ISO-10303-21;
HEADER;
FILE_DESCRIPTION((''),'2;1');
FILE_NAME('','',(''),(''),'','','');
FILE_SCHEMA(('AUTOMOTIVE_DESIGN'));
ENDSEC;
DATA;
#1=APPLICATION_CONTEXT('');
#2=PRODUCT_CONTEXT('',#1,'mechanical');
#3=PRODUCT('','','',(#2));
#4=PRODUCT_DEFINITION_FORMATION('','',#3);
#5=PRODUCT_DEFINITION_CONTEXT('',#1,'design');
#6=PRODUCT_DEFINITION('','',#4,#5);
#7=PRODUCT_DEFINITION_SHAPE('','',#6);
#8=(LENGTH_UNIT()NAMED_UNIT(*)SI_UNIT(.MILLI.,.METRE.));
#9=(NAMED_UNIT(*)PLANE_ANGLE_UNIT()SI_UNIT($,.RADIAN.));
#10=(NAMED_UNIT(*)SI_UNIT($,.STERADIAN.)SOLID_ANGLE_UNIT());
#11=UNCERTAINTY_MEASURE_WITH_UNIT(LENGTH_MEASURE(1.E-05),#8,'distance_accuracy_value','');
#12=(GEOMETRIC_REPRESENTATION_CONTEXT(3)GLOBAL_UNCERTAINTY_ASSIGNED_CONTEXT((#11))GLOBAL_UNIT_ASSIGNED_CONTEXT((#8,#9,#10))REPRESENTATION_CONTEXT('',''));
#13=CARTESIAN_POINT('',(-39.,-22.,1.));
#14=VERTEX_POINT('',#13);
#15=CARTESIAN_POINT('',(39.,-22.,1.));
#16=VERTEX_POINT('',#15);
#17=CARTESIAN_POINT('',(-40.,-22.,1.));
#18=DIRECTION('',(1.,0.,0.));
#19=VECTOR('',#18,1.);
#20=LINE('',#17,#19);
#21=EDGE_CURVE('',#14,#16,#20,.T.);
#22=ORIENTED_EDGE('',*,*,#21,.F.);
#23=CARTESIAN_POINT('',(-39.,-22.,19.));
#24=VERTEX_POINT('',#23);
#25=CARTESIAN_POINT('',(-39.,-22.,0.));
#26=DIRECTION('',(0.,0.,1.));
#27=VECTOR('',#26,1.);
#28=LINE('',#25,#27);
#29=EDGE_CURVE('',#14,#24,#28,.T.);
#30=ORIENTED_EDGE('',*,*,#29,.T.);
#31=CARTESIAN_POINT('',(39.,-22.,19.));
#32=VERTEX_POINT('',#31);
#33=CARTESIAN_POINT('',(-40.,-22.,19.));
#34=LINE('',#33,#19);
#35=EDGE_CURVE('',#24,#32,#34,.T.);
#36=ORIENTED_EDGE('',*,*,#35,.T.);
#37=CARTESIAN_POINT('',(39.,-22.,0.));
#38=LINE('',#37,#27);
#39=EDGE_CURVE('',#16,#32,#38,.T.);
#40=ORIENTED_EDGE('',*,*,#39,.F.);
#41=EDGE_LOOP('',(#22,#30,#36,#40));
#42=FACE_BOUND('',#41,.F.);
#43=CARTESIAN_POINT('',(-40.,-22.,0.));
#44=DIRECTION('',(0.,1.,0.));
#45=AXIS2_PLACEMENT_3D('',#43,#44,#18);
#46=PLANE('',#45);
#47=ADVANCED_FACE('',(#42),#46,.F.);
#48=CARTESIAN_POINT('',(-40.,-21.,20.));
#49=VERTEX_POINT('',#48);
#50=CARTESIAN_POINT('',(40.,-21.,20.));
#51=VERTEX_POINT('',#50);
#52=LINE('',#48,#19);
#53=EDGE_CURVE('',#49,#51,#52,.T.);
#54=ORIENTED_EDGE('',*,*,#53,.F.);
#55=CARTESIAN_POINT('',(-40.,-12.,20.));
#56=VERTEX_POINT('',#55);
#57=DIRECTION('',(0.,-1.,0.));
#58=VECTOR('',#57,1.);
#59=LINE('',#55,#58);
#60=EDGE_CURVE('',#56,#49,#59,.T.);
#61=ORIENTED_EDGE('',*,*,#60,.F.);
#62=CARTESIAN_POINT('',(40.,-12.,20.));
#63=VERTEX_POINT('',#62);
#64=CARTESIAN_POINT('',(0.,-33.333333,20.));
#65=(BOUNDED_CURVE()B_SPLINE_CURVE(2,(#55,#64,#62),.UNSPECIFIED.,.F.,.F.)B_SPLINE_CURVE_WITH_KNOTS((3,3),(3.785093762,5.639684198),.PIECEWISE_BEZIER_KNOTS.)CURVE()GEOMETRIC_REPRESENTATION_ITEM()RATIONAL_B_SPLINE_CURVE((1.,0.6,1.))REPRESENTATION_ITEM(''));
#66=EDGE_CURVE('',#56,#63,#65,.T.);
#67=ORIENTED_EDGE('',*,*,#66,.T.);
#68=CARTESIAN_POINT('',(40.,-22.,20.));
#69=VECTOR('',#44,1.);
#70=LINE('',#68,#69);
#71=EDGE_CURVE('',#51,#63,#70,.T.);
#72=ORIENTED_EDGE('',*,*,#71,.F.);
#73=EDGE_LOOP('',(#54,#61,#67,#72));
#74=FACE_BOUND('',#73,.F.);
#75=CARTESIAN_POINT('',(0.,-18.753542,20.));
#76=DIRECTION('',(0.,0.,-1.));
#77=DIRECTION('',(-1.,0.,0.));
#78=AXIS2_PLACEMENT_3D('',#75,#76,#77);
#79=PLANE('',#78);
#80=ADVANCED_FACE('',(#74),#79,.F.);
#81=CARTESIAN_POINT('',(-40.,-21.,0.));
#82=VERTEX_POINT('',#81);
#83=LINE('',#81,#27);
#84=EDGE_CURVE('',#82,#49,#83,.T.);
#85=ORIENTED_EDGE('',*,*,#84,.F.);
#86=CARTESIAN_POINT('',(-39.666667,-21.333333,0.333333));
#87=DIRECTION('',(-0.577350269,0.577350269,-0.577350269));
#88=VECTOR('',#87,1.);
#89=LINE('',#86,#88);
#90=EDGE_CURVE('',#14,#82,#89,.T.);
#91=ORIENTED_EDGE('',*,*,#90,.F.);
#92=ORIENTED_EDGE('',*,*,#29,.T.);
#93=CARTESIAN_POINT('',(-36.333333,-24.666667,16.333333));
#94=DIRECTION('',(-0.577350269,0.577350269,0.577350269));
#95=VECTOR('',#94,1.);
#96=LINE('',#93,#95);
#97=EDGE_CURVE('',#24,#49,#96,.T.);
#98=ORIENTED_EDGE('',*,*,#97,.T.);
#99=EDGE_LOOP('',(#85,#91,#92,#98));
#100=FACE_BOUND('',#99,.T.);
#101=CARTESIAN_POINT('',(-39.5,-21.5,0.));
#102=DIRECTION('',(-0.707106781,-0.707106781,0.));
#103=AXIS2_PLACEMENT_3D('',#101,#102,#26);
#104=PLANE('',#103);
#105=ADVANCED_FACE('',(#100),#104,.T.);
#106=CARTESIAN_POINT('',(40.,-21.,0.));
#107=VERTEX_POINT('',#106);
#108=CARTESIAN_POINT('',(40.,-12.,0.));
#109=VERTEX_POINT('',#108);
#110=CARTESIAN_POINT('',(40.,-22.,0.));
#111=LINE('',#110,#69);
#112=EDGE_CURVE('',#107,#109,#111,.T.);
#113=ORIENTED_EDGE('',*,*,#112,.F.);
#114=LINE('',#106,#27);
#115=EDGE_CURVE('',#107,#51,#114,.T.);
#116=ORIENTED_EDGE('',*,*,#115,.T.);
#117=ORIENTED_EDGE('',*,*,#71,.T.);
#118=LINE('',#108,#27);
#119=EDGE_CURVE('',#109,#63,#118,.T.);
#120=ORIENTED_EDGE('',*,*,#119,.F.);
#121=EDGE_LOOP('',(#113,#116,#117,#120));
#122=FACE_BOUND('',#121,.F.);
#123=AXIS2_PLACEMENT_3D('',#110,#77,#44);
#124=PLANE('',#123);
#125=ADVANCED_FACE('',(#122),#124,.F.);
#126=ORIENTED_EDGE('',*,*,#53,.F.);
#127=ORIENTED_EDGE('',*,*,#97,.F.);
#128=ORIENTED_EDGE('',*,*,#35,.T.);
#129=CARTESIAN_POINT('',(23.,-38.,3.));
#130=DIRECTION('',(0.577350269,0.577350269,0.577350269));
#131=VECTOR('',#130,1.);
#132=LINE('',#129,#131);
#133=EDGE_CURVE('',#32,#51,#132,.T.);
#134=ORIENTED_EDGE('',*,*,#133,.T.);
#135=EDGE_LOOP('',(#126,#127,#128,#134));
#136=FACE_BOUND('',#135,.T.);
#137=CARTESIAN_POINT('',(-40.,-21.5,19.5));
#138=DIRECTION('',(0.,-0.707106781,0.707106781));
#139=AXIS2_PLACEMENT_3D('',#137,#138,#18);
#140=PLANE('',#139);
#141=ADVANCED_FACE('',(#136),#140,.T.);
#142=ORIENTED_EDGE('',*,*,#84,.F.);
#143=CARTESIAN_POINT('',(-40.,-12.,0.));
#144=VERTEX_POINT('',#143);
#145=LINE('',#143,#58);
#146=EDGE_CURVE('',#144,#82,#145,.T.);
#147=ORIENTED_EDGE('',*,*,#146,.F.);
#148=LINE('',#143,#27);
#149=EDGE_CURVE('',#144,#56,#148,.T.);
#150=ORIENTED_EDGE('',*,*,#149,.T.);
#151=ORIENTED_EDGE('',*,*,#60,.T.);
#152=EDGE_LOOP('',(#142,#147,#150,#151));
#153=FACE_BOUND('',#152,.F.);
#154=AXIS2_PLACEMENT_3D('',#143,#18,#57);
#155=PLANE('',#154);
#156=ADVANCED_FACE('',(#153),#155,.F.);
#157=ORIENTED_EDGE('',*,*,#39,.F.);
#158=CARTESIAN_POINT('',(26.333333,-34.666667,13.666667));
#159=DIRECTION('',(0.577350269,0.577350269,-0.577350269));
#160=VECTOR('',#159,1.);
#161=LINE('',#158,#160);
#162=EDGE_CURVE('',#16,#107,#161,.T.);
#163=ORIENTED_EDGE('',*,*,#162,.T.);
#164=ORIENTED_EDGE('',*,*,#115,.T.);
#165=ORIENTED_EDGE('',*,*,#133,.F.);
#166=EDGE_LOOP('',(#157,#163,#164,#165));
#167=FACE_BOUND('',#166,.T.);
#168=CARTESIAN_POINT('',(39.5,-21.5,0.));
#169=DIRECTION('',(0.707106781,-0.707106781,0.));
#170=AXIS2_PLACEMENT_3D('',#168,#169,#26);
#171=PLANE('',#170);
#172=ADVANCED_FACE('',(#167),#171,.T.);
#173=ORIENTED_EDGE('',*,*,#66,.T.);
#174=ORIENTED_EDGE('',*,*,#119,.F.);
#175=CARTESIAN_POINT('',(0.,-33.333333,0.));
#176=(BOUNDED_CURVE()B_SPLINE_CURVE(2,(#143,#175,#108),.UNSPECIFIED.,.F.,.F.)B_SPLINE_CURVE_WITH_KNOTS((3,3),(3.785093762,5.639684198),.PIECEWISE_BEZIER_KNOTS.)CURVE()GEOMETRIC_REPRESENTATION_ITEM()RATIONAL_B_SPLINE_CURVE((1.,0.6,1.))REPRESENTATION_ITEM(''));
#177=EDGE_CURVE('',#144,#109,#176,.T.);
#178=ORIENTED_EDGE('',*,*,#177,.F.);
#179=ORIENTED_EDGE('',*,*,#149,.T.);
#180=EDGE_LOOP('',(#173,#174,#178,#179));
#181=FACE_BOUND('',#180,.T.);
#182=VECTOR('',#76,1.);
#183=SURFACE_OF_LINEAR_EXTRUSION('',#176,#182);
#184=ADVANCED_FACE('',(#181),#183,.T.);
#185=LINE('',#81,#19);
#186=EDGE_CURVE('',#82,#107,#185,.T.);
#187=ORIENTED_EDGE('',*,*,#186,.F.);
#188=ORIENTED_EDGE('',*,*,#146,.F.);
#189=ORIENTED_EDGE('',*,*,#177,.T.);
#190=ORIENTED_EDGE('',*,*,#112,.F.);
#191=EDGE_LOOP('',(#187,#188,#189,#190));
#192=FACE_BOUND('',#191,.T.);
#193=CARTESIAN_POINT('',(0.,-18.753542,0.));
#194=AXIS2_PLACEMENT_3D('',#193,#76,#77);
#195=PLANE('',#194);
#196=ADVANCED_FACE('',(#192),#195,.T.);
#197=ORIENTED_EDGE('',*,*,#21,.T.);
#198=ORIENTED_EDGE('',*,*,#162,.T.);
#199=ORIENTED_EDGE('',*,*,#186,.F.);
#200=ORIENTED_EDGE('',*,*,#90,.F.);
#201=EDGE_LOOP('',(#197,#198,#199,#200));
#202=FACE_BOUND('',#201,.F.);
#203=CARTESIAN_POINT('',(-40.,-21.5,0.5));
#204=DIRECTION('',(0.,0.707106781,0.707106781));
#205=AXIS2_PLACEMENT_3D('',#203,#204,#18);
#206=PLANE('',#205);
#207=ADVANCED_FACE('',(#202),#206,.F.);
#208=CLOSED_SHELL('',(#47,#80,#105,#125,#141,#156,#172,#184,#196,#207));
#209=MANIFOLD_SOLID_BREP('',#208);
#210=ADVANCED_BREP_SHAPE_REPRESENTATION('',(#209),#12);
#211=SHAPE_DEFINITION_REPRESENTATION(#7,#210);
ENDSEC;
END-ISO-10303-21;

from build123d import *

# Parameters (mm, degrees)
F1_DEPTH = 20
F2_SIZE  = 1


with BuildPart() as f1:
    # F0 (on Top) → F1 (new body)
    with BuildSketch(Plane.XY):
        with BuildLine():
            add(Edge.make_bspline(
                [(-40, -12), (0, -33.3333333333), (40, -12)],
                knots=[3.7850937624, 3.7850937624, 3.7850937624, 5.6396841984, 5.6396841984, 5.6396841984], degree=2, weights=[1, 0.6, 1]))
            Line((-40, -12), (-40, -22))
            Line((-40, -22), (40, -22))
            Line((40, -22), (40, -12))
        make_face()
    extrude(amount=F1_DEPTH)

    # F2
    f2_edges = [f1.edges().sort_by_distance(p)[0] for p in [
        (-40, -22, 10),
        (0, -22, 20),
        (0, -22, 0),
        (40, -22, 10),
    ]]
    chamfer(f2_edges, length=F2_SIZE)


solid = f1.part
